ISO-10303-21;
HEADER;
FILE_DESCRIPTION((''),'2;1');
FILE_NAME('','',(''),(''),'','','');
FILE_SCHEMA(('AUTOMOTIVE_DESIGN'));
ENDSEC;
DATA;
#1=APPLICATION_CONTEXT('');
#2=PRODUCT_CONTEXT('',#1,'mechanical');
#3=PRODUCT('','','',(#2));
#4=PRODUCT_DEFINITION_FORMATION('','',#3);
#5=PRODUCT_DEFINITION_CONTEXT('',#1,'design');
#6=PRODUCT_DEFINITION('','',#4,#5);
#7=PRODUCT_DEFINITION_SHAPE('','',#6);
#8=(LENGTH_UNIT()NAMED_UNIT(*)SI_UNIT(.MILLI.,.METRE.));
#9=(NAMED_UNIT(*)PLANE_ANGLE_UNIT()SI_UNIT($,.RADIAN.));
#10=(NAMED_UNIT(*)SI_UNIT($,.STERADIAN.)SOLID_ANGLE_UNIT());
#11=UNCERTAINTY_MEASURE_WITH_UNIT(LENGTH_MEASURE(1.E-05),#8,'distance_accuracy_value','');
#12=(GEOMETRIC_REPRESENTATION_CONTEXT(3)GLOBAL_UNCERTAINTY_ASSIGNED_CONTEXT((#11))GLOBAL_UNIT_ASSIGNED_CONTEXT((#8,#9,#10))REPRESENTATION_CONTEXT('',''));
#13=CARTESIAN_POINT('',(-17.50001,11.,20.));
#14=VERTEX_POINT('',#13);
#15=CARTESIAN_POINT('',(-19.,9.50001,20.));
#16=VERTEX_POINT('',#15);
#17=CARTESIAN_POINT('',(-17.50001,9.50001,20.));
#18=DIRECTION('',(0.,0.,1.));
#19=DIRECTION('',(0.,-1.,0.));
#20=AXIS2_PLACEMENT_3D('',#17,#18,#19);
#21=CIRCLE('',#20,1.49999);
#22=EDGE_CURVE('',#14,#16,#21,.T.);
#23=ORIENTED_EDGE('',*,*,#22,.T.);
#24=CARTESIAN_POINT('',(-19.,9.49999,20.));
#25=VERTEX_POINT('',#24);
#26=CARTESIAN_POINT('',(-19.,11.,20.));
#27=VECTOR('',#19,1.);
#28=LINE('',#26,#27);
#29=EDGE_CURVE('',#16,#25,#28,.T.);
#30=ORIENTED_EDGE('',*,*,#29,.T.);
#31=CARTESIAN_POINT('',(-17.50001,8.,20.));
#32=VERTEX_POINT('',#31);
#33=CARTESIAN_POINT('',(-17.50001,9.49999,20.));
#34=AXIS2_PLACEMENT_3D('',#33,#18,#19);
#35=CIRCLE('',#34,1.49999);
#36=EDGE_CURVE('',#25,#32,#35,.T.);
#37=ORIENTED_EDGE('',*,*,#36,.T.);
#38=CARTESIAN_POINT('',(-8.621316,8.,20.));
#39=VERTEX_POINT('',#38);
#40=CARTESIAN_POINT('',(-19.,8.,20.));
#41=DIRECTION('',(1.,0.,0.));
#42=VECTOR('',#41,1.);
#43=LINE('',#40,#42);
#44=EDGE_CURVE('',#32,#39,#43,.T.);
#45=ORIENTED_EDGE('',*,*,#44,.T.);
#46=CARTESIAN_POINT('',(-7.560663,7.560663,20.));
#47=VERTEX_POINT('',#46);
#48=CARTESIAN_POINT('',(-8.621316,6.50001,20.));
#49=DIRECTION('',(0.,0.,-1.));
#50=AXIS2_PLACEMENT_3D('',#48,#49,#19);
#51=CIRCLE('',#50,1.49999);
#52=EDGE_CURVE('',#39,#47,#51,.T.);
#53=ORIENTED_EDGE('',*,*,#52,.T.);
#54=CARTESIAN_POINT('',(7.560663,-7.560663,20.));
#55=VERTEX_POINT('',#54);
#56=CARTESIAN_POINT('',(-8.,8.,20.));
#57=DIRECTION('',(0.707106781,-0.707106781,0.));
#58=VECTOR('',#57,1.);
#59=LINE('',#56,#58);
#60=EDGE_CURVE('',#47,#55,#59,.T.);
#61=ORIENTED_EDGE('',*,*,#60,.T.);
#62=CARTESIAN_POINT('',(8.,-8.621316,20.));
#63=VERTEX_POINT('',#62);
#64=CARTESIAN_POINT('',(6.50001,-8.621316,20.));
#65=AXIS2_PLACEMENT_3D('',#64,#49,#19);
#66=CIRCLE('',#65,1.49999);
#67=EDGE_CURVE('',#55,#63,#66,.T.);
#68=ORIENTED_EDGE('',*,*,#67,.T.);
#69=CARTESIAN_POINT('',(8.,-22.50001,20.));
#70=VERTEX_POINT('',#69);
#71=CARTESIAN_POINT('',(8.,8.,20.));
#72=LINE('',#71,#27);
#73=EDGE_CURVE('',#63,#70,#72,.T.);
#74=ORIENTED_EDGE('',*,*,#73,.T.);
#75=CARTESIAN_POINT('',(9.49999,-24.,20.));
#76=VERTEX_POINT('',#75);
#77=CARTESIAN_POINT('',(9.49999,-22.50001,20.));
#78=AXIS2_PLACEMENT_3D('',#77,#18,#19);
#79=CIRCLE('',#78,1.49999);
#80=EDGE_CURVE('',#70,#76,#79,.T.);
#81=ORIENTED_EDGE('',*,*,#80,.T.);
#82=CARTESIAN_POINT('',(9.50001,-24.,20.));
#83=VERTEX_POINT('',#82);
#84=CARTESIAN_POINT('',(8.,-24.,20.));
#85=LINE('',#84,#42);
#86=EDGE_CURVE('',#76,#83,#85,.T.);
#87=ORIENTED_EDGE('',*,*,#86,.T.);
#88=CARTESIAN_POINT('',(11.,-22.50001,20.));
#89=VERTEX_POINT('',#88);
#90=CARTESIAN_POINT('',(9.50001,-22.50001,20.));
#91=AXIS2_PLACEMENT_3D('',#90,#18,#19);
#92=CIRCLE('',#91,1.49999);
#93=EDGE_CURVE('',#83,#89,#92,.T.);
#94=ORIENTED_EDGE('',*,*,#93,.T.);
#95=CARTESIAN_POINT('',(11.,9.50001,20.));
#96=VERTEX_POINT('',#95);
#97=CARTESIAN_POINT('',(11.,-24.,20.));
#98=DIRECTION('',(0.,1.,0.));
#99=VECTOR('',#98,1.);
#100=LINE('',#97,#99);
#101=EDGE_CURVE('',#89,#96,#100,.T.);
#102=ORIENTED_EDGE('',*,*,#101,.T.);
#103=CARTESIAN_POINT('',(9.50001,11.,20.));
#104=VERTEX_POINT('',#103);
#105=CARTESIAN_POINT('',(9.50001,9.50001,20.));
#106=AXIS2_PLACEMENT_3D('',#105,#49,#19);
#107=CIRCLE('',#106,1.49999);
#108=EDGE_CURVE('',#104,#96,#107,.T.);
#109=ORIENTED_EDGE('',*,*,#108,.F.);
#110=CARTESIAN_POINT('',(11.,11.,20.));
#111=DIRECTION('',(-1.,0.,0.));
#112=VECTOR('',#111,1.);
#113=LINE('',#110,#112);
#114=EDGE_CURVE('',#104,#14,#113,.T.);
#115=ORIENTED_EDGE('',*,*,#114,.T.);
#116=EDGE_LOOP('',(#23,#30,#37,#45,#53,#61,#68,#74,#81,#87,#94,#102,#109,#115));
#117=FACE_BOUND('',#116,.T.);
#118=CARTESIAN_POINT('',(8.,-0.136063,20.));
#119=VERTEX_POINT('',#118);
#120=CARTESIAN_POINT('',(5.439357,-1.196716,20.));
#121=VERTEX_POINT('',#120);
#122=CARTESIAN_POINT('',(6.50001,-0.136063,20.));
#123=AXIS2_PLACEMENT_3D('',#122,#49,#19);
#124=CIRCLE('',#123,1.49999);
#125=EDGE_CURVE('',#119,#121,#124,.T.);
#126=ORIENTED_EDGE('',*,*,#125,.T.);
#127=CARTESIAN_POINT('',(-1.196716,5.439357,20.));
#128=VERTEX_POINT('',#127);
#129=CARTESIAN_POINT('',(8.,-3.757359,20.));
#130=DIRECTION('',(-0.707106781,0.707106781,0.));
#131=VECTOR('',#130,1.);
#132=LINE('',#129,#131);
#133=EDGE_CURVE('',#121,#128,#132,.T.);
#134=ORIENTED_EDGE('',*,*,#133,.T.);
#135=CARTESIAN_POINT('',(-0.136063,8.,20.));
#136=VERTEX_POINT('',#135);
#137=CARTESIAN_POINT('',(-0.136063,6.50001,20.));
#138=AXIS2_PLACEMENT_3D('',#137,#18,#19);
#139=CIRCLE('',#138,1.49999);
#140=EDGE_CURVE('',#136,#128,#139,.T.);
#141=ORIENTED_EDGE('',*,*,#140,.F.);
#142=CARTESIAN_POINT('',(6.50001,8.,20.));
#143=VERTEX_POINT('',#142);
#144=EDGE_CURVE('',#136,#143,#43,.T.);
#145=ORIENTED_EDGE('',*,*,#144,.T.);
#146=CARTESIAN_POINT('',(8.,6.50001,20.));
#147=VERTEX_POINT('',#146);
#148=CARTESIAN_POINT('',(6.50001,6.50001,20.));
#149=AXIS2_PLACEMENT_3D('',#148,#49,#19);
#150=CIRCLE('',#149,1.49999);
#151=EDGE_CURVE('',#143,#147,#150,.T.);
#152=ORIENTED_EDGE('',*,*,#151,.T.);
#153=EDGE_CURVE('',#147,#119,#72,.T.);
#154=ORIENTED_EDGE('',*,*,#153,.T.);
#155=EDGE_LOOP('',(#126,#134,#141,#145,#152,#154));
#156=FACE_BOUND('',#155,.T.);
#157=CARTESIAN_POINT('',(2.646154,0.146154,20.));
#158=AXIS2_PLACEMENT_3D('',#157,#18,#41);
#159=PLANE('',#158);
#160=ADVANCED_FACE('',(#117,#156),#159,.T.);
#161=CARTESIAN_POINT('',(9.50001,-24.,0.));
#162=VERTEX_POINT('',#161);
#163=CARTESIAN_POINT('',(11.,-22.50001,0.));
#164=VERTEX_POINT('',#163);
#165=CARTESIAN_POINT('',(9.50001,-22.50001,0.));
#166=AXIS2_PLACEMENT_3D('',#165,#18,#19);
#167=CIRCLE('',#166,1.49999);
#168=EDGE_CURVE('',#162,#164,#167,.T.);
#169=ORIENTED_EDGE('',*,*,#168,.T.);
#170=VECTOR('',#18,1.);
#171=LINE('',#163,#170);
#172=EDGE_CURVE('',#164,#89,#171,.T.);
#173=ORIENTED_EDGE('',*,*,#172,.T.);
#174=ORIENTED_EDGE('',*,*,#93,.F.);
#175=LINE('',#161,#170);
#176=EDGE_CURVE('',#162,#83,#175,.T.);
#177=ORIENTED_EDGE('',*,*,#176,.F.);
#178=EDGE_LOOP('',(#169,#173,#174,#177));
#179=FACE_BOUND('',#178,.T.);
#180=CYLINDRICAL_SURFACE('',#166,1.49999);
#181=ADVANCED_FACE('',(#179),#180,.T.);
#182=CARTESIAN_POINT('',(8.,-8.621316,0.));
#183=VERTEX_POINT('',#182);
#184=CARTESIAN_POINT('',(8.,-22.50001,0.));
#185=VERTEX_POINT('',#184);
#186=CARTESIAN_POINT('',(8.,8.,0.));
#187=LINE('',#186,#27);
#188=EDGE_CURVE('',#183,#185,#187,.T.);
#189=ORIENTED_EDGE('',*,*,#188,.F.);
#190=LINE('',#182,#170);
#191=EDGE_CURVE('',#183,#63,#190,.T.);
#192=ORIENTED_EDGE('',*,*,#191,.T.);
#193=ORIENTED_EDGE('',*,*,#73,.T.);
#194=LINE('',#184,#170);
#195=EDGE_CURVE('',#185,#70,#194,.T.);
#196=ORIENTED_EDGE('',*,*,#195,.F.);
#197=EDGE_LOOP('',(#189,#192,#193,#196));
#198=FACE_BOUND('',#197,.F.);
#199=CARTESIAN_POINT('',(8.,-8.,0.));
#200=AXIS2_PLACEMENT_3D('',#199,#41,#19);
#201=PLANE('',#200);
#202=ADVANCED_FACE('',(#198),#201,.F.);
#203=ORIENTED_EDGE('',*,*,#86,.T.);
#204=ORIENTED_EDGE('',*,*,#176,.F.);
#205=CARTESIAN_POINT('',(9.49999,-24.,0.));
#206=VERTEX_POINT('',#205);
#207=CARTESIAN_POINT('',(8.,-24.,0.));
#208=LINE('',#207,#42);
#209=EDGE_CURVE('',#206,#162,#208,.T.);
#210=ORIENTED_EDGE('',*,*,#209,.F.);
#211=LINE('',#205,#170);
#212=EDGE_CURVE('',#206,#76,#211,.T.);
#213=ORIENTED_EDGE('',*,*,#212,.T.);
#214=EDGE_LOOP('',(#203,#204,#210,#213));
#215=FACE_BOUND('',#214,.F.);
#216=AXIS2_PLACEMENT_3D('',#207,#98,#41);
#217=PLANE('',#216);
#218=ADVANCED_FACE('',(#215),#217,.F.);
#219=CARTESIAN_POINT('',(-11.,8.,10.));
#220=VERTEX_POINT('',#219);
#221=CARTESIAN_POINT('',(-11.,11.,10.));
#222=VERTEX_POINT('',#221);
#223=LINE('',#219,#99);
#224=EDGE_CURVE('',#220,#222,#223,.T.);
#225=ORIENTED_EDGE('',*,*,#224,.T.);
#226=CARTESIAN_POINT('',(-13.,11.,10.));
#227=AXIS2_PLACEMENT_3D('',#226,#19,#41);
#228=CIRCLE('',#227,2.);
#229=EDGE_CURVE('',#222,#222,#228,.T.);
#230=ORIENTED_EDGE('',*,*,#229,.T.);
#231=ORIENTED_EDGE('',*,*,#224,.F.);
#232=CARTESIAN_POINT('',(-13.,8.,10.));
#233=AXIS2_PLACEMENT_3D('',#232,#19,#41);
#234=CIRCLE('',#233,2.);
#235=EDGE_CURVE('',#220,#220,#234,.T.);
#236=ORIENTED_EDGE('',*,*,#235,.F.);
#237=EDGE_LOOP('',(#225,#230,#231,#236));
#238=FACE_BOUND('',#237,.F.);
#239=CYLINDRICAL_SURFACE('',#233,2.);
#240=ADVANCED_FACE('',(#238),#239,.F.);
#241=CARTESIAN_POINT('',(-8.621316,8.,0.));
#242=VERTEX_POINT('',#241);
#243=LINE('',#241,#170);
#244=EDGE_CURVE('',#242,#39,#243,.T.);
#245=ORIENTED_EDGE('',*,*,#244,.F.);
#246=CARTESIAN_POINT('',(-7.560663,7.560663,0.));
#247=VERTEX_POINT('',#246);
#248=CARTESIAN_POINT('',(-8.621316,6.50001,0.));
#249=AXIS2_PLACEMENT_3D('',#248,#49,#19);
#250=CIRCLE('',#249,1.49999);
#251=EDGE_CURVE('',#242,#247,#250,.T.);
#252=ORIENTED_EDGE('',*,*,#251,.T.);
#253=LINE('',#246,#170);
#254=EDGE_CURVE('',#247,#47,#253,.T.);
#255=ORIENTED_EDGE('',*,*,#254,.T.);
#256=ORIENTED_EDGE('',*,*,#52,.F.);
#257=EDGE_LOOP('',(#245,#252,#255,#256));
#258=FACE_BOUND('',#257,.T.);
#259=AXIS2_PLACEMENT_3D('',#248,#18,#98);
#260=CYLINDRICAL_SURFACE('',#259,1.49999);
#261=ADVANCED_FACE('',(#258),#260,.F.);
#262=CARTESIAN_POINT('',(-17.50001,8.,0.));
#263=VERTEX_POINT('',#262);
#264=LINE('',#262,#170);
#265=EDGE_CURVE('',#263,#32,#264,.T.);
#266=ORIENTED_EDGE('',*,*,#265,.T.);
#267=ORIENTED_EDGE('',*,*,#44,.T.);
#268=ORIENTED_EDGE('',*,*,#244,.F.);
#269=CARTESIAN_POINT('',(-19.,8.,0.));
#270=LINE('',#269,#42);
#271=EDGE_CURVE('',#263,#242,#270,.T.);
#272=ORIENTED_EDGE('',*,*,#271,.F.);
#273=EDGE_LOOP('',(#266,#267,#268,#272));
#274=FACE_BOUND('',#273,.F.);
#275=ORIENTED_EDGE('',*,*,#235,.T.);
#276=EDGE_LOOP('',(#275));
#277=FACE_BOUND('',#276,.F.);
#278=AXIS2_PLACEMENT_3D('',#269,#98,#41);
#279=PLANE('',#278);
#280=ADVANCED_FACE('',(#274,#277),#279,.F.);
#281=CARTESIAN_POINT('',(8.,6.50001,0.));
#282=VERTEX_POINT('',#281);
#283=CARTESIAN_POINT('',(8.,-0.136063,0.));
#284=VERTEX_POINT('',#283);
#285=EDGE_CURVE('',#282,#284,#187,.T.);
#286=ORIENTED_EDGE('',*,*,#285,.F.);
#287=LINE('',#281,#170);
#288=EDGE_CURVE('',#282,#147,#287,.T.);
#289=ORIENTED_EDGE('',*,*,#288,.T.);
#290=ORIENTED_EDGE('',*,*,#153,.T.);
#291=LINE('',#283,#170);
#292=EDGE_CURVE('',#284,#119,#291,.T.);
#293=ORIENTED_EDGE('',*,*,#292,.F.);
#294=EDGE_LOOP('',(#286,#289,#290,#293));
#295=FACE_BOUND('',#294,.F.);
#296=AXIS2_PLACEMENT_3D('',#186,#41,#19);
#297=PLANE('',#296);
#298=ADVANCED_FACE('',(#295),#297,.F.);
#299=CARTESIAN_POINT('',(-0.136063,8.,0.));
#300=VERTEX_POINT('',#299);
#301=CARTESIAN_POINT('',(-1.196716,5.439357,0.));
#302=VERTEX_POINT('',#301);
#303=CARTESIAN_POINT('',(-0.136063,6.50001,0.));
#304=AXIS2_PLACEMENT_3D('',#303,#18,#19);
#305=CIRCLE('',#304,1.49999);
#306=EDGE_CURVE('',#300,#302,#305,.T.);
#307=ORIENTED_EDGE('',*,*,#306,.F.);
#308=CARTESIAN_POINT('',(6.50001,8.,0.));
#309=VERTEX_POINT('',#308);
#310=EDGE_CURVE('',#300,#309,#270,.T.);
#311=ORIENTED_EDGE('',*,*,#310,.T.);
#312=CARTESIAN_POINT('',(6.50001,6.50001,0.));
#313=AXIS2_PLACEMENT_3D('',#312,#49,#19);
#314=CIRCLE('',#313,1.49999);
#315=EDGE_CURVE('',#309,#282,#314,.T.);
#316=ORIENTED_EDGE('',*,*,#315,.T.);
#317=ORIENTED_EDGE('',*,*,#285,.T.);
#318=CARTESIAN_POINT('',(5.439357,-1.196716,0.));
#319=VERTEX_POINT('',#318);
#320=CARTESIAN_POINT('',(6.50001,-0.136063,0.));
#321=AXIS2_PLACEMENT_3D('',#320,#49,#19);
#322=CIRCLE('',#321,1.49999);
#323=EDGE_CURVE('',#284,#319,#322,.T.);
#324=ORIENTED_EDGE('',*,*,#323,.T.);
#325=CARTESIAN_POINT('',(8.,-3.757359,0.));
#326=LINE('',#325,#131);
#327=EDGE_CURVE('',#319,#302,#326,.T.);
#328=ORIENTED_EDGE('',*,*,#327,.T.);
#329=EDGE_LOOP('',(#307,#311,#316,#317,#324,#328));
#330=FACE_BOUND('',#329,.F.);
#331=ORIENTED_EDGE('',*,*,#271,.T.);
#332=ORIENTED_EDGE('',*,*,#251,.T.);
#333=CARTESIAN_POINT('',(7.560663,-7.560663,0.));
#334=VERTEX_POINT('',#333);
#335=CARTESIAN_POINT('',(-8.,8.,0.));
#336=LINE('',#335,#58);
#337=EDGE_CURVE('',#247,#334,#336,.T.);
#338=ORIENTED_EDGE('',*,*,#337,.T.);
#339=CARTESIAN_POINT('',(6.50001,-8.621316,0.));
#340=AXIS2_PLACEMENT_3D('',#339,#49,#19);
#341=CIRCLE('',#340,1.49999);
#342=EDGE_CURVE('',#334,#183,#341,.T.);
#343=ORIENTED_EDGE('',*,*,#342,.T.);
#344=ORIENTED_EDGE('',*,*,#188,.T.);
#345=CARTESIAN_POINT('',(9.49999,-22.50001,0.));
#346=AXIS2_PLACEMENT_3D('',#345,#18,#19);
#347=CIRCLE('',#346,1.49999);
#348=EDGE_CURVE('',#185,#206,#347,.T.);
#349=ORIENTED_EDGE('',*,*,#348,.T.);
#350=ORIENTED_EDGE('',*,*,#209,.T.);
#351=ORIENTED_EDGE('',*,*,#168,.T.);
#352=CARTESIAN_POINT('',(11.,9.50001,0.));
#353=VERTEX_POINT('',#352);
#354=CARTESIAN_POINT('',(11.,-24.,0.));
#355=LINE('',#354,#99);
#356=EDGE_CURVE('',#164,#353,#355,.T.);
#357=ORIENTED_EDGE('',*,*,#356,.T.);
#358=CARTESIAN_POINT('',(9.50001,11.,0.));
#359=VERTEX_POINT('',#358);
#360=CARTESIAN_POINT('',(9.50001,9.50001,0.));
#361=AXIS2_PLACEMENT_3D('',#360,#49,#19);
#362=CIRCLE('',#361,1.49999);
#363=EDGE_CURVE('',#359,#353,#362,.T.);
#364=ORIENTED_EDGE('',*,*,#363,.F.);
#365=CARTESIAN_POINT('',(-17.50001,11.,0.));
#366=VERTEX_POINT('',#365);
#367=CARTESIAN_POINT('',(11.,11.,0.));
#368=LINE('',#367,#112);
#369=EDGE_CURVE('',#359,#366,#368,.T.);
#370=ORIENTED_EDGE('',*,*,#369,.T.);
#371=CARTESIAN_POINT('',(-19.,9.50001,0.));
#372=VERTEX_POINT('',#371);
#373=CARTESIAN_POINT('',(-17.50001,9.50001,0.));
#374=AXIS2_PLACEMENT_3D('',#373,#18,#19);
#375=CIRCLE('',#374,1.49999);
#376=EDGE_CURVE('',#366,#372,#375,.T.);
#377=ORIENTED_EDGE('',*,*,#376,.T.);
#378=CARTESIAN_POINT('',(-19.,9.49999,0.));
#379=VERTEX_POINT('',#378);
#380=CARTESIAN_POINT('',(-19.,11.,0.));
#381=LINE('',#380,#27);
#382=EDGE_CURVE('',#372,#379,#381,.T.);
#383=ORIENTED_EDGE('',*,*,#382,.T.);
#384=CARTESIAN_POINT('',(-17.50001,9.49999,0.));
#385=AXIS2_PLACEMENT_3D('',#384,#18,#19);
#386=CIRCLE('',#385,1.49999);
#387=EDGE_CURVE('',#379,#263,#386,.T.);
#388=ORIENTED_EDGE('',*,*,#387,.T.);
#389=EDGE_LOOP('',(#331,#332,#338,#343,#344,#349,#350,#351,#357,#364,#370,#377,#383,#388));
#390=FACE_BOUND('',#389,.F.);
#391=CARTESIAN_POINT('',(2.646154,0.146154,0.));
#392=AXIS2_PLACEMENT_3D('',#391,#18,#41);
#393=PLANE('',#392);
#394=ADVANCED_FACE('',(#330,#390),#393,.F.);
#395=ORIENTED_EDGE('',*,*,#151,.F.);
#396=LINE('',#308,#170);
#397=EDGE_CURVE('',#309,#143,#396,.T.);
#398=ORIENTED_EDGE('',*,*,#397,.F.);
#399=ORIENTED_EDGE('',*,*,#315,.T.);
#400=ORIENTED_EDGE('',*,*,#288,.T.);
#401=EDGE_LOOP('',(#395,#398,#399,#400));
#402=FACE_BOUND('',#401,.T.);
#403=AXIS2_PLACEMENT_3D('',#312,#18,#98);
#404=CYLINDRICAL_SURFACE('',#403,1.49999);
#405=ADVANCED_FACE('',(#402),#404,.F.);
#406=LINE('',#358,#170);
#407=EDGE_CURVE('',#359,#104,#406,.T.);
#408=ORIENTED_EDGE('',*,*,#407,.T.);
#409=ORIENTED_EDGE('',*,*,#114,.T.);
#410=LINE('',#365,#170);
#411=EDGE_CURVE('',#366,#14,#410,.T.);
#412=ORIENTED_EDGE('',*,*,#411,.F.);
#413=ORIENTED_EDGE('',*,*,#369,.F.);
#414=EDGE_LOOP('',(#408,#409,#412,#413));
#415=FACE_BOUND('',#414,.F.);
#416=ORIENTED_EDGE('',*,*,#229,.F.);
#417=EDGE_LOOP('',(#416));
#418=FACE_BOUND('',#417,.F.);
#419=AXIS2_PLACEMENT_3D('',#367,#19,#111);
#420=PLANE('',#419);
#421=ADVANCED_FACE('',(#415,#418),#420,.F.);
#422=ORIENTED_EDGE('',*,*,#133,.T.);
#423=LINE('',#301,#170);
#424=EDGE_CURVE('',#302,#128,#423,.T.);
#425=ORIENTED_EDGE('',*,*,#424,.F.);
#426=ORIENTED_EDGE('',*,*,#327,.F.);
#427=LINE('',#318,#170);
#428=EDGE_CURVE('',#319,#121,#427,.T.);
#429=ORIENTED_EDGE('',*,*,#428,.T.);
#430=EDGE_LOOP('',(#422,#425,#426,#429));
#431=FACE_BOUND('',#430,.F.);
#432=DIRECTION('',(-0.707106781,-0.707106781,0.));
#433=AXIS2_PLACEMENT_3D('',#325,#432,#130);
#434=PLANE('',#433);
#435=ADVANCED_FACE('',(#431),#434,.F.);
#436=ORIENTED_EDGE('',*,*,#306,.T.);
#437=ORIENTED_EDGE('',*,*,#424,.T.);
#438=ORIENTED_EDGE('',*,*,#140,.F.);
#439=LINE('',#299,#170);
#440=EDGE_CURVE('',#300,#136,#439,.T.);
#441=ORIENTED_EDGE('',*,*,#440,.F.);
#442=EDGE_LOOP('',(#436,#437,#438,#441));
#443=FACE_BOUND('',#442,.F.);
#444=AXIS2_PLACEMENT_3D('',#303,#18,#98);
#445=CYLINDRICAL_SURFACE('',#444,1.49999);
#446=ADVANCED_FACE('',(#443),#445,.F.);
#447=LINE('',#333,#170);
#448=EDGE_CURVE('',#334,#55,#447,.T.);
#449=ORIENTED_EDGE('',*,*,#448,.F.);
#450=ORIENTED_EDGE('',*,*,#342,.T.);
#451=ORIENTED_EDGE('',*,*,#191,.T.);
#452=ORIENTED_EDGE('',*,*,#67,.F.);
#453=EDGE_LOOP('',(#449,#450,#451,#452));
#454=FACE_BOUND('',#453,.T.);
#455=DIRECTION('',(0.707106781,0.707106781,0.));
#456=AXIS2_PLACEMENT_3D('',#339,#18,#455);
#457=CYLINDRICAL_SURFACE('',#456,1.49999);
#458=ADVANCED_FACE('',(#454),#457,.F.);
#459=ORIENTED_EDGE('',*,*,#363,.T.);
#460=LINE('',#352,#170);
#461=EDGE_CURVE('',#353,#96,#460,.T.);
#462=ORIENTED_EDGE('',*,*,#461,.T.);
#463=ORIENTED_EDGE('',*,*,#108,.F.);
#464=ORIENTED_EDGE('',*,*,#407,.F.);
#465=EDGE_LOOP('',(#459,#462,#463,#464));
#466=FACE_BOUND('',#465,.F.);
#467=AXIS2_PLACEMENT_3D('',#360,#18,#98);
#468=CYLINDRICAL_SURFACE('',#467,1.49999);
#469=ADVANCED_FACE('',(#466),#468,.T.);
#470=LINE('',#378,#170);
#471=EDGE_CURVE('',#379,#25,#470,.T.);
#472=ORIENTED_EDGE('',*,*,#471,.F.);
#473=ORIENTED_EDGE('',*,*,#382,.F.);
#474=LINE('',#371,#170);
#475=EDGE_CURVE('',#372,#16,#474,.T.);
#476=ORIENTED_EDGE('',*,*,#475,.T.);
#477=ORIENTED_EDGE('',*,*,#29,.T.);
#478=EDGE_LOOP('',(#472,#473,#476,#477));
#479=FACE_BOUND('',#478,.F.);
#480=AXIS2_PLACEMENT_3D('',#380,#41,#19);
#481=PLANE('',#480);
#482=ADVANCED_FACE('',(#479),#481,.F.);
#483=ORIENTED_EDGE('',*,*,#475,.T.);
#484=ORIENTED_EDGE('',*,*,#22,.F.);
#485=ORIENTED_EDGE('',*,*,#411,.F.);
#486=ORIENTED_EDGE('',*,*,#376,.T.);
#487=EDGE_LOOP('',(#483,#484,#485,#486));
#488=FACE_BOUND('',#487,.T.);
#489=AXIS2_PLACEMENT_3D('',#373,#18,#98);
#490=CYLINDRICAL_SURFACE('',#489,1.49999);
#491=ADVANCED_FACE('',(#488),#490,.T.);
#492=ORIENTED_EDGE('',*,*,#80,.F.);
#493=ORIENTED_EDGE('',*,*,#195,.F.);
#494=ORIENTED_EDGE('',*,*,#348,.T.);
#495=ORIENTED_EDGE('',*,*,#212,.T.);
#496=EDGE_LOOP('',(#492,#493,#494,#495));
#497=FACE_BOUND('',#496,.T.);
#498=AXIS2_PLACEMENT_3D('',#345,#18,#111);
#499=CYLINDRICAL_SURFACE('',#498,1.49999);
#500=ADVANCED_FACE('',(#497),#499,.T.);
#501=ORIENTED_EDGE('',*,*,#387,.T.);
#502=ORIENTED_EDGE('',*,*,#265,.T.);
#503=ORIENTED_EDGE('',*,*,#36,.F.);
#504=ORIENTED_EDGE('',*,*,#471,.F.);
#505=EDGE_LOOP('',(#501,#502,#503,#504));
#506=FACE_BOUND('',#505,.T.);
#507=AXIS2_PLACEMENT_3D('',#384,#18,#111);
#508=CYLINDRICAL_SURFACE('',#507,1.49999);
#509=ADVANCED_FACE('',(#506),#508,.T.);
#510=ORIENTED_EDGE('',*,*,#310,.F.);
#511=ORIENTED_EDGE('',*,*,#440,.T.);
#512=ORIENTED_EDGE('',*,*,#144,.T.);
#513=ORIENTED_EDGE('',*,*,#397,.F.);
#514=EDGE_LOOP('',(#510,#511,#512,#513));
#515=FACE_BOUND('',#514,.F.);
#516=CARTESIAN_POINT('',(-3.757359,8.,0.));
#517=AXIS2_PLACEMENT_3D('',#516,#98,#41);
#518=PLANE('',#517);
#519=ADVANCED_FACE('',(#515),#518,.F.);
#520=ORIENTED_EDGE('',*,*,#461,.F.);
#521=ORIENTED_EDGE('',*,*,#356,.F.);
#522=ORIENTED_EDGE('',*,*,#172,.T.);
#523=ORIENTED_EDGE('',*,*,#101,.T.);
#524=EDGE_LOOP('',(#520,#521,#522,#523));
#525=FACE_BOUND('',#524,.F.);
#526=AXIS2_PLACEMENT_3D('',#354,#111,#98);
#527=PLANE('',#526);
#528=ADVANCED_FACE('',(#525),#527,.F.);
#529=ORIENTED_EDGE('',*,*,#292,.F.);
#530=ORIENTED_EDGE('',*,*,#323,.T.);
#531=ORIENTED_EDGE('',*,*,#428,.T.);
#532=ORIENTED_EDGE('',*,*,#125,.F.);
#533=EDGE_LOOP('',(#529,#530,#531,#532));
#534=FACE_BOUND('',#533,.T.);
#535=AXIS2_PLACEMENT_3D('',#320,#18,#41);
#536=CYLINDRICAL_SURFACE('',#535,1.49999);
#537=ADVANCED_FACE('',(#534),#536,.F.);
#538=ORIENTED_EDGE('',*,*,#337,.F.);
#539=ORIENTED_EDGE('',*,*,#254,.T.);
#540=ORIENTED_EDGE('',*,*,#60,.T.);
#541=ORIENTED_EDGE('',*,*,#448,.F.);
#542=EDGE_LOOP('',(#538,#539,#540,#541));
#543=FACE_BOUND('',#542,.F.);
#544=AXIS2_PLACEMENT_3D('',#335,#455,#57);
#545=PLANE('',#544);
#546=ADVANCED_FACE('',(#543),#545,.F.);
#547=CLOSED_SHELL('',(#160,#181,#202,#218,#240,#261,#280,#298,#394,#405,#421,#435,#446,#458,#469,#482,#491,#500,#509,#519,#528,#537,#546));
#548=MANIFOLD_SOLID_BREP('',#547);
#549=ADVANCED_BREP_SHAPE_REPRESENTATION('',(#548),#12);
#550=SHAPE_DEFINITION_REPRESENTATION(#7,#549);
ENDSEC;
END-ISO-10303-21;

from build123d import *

# Parameters (mm, degrees)
F1_DEPTH = 20
F3_R     = 1.49999
F2_R     = 2
F4_DEPTH = 3


# Not quite as in the source:
# - a fillet or chamfer is up to 0.001 mm smaller than in the source, because OpenCascade refuses the exact size


with BuildPart() as f1:
    # F0 (on Top) → F1 (new body)
    with BuildSketch(Plane.XY):
        Polygon((11, 11), (-19, 11), (-19, 8), (-8, 8), (-3.7573593129, 8), (8, 8), (8, -3.7573593129), (8, -8), (8, -24), (11, -24), align=None)
        Polygon((-3.7573593129, 8), (-8, 8), (8, -8), (8, -3.7573593129), align=None)
    extrude(amount=F1_DEPTH)

    # F3 (radius 1.5 in the source; OpenCascade refuses exactly that, so slightly less here)
    f3_edges = [f1.edges().sort_by_distance(p)[0] for p in [
        (-19, 8, 10),
        (-19, 11, 10),
        (-8, 8, 10),
        (8, -24, 10),
        (11, -24, 10),
        (8, -8, 10),
        (8, 8, 10),
        (11, 11, 10),
        (-3.757359, 8, 10),
        (8, -3.757359, 10),
    ]]
    fillet(f3_edges, radius=F3_R)

    # F2 (on face) → F4 (cut, through all)
    with BuildSketch(Plane.XZ.offset(-8)):
        with Locations((-13, 10)):
            Circle(F2_R)
    extrude(amount=-F4_DEPTH, mode=Mode.SUBTRACT)


solid = f1.part
